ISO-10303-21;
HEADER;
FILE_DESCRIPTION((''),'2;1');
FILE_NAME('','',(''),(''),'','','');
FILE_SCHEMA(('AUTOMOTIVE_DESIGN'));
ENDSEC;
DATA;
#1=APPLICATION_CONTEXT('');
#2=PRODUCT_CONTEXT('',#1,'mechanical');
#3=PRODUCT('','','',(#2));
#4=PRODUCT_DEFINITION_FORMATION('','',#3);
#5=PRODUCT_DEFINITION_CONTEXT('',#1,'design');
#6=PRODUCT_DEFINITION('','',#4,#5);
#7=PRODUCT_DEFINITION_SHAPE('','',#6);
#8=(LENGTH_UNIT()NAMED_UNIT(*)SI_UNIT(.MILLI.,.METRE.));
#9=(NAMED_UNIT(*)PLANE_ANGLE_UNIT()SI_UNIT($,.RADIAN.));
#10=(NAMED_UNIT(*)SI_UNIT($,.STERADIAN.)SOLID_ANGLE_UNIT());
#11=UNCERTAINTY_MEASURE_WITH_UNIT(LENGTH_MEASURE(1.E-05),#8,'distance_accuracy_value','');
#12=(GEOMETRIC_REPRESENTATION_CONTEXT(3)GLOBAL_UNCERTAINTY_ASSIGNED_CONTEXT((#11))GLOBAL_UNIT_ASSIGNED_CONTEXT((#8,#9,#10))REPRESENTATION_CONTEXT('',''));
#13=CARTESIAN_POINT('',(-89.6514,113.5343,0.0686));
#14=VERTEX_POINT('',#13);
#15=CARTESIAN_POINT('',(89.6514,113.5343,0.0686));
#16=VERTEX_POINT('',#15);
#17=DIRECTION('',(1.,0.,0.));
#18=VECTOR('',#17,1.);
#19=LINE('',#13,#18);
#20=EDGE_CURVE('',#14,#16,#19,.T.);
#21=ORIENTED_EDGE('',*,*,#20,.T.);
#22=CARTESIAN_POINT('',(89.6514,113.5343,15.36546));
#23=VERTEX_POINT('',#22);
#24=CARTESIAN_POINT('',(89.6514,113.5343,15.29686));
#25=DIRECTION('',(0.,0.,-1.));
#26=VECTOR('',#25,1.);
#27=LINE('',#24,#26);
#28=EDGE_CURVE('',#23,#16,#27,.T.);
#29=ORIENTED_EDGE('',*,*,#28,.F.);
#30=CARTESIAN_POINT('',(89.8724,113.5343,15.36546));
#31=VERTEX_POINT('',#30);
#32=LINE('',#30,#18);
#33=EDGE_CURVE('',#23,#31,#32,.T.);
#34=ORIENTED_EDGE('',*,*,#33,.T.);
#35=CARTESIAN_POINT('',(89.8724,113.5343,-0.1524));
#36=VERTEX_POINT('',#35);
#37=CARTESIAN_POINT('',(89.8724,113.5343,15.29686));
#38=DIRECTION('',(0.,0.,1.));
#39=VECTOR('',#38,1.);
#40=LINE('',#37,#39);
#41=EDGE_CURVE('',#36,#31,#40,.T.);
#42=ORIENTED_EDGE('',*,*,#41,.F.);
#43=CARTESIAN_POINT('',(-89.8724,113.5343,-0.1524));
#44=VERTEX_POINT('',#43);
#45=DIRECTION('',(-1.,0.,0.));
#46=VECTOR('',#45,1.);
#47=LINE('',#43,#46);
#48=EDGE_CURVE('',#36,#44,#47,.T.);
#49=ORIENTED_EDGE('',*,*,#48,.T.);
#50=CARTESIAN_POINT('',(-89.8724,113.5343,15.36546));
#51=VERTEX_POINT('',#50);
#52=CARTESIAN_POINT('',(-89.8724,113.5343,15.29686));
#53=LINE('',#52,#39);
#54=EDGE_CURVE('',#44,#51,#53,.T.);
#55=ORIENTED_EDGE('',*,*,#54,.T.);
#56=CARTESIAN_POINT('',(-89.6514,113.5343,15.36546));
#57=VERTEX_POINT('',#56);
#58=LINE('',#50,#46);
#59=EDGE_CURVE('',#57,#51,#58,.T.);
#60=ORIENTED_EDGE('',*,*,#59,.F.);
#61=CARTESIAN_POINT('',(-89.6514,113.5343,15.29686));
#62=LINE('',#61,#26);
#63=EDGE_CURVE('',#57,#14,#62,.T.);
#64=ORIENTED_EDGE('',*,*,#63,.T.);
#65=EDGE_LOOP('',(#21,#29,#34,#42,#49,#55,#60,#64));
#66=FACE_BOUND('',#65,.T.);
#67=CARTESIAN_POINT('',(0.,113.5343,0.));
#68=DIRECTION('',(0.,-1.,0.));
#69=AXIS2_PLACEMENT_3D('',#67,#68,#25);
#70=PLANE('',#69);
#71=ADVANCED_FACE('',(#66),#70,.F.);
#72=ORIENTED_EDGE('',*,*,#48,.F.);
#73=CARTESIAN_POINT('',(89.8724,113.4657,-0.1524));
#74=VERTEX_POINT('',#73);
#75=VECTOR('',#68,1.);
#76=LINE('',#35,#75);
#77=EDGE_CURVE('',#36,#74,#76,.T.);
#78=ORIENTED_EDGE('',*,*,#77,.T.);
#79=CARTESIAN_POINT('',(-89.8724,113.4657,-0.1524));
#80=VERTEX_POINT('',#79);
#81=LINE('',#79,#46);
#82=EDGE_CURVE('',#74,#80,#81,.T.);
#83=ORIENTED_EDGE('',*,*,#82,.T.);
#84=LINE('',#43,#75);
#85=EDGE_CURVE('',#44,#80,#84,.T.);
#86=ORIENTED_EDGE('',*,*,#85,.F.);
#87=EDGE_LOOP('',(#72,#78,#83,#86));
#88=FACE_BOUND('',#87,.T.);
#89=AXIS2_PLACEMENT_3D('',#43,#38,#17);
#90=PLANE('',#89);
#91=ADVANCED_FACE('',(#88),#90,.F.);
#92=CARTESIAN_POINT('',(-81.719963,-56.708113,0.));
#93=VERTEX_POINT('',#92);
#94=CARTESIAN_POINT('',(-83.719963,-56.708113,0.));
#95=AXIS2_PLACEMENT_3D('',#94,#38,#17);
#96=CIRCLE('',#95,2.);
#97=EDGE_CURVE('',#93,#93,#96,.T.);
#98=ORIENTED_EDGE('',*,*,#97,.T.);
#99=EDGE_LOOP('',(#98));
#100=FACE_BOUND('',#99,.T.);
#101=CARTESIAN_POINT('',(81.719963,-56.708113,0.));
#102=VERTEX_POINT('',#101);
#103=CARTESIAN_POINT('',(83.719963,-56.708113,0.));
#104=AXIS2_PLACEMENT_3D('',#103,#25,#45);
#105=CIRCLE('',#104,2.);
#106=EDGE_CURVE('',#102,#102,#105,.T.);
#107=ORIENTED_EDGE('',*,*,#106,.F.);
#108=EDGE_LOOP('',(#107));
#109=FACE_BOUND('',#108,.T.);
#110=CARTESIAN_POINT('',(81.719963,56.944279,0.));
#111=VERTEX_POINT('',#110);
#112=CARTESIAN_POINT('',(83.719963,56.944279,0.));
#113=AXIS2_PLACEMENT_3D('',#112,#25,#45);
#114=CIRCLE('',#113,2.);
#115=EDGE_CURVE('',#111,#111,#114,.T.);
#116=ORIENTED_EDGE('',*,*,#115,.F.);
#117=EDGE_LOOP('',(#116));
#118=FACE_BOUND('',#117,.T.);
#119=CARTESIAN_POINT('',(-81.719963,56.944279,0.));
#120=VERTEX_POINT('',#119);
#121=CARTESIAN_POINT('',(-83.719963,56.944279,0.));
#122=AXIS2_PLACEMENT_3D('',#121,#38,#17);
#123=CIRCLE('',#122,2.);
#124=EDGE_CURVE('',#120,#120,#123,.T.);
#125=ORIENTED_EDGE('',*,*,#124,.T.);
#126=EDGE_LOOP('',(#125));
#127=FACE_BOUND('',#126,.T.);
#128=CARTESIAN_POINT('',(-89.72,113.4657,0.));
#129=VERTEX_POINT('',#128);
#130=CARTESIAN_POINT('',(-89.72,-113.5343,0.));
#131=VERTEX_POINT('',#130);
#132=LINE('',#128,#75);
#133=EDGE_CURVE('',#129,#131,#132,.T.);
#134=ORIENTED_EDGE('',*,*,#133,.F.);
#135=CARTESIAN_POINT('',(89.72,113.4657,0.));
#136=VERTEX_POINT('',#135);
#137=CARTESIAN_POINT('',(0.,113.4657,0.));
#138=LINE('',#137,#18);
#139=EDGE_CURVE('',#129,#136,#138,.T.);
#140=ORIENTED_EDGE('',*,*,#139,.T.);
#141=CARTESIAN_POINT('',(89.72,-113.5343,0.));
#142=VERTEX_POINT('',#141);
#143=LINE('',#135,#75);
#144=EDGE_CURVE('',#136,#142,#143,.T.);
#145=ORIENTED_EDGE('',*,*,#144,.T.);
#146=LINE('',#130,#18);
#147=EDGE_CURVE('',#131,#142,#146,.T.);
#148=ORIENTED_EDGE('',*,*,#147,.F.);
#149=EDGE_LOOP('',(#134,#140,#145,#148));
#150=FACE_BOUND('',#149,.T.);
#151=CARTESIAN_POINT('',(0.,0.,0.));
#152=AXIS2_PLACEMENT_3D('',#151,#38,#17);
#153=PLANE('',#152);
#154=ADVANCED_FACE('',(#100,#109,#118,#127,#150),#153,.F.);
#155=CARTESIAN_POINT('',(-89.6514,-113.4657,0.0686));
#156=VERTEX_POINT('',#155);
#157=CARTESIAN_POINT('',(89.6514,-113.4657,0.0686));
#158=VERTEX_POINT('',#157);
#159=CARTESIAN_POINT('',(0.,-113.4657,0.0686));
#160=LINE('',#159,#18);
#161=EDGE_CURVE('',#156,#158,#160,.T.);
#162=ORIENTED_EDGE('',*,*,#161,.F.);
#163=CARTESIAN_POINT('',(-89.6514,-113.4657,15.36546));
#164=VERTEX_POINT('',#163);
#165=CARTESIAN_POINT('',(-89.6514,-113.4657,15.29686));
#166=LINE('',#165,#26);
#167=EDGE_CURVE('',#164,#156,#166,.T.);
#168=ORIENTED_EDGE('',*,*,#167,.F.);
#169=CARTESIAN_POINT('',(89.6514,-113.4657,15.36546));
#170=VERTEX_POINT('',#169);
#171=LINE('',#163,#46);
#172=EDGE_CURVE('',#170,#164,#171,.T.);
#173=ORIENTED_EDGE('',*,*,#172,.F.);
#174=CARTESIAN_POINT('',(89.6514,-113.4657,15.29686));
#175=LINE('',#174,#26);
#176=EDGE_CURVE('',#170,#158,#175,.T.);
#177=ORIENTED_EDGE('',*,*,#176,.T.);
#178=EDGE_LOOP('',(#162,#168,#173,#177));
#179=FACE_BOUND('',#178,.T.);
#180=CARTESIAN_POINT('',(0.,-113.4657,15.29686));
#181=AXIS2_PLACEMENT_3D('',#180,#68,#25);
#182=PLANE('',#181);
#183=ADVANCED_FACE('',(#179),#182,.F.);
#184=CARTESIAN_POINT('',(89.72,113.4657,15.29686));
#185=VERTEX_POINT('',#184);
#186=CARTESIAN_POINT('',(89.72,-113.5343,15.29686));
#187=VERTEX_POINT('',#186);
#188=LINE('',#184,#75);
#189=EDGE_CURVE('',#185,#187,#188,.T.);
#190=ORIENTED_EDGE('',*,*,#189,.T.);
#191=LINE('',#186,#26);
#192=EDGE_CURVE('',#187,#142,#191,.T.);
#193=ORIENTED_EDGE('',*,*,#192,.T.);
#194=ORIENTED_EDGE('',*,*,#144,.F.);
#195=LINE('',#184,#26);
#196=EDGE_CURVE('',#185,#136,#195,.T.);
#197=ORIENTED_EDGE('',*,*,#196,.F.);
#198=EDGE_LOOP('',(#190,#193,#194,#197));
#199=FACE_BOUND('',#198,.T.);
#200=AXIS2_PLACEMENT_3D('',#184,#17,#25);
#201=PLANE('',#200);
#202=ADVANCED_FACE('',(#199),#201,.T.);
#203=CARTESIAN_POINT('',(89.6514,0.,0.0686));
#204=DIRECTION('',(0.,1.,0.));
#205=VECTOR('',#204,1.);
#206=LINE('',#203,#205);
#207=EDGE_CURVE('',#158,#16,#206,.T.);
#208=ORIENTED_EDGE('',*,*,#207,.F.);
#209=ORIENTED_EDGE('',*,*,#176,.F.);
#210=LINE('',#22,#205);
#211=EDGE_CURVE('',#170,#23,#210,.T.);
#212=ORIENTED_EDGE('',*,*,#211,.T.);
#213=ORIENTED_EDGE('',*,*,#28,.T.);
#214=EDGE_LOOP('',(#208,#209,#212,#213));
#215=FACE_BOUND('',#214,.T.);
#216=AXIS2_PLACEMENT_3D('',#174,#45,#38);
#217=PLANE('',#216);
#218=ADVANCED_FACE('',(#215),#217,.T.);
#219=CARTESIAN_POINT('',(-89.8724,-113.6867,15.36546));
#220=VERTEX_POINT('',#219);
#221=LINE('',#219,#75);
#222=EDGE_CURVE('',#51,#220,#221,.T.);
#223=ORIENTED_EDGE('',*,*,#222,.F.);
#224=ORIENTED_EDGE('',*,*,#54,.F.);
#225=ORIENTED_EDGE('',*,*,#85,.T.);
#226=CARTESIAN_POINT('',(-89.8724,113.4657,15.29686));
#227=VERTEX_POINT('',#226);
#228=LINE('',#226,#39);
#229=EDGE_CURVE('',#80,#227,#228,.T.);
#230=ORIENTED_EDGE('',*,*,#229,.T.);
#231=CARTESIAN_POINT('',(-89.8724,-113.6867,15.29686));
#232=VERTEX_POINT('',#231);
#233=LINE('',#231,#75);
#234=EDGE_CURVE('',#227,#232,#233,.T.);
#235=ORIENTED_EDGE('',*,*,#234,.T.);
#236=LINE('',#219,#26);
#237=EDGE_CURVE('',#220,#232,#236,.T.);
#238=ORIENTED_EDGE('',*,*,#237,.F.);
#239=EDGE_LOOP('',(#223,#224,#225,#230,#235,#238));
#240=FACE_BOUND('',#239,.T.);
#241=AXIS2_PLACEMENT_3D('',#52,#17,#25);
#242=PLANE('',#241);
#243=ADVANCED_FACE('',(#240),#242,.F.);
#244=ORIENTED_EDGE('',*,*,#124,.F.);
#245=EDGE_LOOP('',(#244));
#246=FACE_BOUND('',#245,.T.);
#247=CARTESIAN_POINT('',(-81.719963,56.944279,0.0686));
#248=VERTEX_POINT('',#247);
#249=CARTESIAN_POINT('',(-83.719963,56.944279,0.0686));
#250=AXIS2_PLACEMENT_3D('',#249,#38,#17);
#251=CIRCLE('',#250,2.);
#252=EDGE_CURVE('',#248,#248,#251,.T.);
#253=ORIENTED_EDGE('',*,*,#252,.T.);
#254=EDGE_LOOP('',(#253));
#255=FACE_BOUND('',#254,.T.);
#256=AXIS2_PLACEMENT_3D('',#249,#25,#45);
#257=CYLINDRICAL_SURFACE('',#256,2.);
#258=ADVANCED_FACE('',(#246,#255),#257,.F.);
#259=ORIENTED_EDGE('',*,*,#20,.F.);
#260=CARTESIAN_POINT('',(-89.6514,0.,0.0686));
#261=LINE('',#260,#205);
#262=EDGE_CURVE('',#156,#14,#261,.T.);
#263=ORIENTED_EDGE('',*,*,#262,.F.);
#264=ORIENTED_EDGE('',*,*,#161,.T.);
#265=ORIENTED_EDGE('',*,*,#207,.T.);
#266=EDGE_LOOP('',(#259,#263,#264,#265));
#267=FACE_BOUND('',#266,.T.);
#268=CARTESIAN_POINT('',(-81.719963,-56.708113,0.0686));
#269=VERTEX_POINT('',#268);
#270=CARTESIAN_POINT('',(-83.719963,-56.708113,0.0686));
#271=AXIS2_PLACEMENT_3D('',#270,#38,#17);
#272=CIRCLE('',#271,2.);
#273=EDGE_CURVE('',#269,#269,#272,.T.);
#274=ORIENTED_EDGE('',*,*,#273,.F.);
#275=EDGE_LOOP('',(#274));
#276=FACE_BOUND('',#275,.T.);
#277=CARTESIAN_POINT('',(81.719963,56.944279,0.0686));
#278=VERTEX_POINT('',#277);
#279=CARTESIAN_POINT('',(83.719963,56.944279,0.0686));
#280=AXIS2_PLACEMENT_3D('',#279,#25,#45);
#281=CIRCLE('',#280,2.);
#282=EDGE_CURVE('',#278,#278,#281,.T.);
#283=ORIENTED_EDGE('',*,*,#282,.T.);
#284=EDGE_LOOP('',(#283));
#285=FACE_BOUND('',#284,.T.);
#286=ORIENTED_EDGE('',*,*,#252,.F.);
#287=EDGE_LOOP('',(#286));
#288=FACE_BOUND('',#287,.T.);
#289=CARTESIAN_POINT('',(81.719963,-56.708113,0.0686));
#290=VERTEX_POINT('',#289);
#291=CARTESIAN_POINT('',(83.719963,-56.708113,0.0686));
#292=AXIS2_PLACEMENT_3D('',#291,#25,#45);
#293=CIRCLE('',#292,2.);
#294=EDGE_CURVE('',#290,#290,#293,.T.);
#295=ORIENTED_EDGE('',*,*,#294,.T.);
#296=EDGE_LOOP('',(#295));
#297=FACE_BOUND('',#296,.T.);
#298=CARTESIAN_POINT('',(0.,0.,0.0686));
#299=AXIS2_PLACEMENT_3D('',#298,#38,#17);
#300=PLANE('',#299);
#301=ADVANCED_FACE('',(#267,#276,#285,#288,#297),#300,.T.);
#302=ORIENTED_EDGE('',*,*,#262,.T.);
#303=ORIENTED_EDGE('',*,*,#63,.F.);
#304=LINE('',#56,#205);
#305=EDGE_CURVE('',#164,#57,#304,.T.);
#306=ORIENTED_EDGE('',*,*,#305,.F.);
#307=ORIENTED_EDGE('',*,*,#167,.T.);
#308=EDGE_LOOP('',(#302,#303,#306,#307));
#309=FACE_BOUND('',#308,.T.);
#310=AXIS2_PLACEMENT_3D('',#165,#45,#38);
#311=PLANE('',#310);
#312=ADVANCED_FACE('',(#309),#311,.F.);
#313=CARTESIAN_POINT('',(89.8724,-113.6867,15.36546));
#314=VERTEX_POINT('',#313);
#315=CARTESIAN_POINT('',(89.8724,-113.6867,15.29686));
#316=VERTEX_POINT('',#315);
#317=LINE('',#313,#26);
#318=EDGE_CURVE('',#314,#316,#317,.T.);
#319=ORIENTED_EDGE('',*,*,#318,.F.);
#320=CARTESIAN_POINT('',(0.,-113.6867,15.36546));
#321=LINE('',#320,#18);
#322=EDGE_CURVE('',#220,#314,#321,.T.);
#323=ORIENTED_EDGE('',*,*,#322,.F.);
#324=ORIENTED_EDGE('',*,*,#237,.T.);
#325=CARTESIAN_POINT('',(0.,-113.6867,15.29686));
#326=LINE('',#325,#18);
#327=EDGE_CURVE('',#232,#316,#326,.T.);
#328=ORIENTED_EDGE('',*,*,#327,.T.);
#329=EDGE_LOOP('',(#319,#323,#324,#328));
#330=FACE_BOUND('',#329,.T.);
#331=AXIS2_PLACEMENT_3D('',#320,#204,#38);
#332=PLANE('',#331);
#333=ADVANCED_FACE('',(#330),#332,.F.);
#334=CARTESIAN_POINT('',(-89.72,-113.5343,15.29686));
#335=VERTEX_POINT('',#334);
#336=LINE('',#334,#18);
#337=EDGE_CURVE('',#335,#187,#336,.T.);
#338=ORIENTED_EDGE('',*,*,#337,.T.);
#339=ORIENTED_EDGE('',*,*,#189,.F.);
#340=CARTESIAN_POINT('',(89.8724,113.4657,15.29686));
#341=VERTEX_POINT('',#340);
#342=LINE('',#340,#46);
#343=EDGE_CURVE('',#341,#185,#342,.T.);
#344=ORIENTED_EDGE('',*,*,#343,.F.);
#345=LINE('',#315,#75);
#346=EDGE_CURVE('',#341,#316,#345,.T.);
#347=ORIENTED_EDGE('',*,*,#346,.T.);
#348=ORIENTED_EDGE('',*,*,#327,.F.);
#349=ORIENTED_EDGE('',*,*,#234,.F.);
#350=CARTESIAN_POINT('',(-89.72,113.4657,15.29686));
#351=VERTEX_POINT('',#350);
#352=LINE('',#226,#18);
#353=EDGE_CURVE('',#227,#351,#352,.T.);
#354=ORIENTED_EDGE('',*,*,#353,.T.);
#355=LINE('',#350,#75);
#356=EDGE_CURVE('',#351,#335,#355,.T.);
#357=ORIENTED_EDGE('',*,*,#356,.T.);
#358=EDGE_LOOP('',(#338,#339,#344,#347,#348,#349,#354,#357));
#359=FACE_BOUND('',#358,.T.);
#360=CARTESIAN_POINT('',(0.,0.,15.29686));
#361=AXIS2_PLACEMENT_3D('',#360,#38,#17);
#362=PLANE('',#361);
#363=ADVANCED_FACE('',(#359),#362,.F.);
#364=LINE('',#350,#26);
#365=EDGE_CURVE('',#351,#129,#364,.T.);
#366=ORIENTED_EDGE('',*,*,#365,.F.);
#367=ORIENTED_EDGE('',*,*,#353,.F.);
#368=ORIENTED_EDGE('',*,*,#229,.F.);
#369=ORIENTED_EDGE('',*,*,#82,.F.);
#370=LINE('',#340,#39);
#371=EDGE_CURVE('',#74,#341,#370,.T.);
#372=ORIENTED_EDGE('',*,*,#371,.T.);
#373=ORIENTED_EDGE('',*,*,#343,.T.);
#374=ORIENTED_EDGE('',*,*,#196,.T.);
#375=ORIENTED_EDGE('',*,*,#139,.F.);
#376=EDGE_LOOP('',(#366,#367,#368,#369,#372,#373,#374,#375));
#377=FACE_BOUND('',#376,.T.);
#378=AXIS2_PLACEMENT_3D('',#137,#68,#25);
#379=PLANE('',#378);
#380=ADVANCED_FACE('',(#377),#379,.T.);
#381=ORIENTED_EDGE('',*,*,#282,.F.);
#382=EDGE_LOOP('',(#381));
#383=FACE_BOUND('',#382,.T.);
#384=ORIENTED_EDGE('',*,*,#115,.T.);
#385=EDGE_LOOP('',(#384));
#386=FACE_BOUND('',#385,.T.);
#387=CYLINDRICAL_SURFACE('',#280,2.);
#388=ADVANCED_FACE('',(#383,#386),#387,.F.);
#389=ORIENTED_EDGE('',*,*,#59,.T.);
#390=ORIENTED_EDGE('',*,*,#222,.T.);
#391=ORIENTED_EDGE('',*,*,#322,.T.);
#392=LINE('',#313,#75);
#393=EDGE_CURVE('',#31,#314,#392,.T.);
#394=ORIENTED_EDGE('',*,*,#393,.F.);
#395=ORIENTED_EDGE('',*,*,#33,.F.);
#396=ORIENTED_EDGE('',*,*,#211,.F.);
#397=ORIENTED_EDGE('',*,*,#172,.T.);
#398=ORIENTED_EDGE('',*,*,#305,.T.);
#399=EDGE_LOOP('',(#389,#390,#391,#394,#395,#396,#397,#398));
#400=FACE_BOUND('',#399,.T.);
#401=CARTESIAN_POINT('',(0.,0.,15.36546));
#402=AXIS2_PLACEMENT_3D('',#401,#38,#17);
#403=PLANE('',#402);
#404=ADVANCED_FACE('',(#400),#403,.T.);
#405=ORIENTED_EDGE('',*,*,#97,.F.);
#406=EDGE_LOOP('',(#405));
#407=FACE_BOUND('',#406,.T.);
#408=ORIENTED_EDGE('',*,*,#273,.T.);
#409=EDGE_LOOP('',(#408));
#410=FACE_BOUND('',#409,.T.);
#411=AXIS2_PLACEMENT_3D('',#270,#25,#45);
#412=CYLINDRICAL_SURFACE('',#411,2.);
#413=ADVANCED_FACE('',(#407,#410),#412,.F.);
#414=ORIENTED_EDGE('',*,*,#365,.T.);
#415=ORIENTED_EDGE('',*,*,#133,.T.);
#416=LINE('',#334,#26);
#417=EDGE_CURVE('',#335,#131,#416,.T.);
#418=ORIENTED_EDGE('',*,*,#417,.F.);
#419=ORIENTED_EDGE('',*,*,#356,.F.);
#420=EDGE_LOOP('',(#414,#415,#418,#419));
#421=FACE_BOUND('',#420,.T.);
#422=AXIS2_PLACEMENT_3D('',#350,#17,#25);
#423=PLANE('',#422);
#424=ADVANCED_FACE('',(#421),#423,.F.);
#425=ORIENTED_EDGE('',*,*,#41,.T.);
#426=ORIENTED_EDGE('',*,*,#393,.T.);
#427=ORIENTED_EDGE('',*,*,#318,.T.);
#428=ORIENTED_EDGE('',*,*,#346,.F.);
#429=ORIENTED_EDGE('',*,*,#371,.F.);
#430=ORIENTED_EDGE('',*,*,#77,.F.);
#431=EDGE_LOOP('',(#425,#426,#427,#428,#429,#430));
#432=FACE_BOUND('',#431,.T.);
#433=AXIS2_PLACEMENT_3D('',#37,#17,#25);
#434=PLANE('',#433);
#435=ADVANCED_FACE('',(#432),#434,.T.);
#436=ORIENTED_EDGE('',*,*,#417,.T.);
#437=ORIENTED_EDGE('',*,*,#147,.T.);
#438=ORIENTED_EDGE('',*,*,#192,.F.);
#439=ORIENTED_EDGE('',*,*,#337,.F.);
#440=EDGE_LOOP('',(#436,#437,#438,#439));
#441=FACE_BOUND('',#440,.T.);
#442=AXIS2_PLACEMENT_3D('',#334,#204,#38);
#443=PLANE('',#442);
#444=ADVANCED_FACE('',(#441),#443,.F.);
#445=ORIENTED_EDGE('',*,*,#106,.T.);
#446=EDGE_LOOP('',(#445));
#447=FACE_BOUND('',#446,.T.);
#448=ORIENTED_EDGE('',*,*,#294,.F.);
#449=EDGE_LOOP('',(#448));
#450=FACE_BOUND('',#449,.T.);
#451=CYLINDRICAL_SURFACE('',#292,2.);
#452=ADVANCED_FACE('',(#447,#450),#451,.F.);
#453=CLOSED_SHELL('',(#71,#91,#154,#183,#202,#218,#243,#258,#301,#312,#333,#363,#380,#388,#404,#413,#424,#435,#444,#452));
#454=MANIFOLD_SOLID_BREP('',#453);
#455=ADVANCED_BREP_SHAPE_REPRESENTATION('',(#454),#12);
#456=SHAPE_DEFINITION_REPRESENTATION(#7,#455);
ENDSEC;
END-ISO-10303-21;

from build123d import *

# Parameters (mm, degrees)
SKETCH1_W             = 89.6514
SKETCH1_H             = 226.9314
SKETCH1_R             = 2
HEAT_EXCHANGER_DEPTH  = 0.0686
CONVECTION_FINS_DEPTH = 15.29686
TOP_OVERWRAP_DEPTH    = 0.0686
SIDE_OVERWRAP_DEPTH   = 0.0686


with BuildPart() as part:
    # Sketch1 → Heat Exchanger (new body)
    with BuildSketch(Plane.XY):
        with Locations((-44.8257, 0)):
            Rectangle(SKETCH1_W, SKETCH1_H)
        with Locations((-83.71996294, -56.7081132)):
            Circle(SKETCH1_R, mode=Mode.SUBTRACT)
        with Locations((-83.71996294, 56.94427919)):
            Circle(SKETCH1_R, mode=Mode.SUBTRACT)
    heat_exchanger = extrude(amount=HEAT_EXCHANGER_DEPTH)

    # Sketch3 → Convection Fins (add)
    with BuildSketch(Plane.XY):
        Polygon((0, -113.5343), (0, -113.4657), (-89.6514, -113.4657), (-89.6514, 113.4657), (-89.72, 113.4657), (-89.72, -113.5343), align=None)
    convection_fins = extrude(amount=CONVECTION_FINS_DEPTH)

    # Sketch5 → Top Overwrap (add)
    with BuildSketch(Plane(origin=(0, 113.4657, 0), x_dir=(1, 0, 0), z_dir=(0, 1, 0))):
        Polygon((-89.8724, -15.29686), (-89.6514, -15.29686), (-89.6514, -0.0686), (0, -0.0686), (0, 0.1524), (-89.8724, 0.1524), align=None)
    top_overwrap = extrude(amount=TOP_OVERWRAP_DEPTH)

    # Sketch7 → Side Overwrap (add)
    with BuildSketch(Plane.XY.offset(15.29686)):
        Polygon((-89.8724, 113.5343), (-89.6514, 113.5343), (-89.6514, -113.4657), (0, -113.4657), (0, -113.6867), (-89.8724, -113.6867), align=None)
    side_overwrap = extrude(amount=SIDE_OVERWRAP_DEPTH)

    # Mirror1: Heat Exchanger, Convection Fins, Top Overwrap, Side Overwrap across plane
    add(heat_exchanger.mirror(Plane(origin=(0, 0, 0), x_dir=(0, 0, 1), z_dir=(1, 0, 0))))
    add(convection_fins.mirror(Plane(origin=(0, 0, 0), x_dir=(0, 0, 1), z_dir=(1, 0, 0))))
    add(top_overwrap.mirror(Plane(origin=(0, 0, 0), x_dir=(0, 0, 1), z_dir=(1, 0, 0))))
    add(side_overwrap.mirror(Plane(origin=(0, 0, 0), x_dir=(0, 0, 1), z_dir=(1, 0, 0))))


solid = part.part
